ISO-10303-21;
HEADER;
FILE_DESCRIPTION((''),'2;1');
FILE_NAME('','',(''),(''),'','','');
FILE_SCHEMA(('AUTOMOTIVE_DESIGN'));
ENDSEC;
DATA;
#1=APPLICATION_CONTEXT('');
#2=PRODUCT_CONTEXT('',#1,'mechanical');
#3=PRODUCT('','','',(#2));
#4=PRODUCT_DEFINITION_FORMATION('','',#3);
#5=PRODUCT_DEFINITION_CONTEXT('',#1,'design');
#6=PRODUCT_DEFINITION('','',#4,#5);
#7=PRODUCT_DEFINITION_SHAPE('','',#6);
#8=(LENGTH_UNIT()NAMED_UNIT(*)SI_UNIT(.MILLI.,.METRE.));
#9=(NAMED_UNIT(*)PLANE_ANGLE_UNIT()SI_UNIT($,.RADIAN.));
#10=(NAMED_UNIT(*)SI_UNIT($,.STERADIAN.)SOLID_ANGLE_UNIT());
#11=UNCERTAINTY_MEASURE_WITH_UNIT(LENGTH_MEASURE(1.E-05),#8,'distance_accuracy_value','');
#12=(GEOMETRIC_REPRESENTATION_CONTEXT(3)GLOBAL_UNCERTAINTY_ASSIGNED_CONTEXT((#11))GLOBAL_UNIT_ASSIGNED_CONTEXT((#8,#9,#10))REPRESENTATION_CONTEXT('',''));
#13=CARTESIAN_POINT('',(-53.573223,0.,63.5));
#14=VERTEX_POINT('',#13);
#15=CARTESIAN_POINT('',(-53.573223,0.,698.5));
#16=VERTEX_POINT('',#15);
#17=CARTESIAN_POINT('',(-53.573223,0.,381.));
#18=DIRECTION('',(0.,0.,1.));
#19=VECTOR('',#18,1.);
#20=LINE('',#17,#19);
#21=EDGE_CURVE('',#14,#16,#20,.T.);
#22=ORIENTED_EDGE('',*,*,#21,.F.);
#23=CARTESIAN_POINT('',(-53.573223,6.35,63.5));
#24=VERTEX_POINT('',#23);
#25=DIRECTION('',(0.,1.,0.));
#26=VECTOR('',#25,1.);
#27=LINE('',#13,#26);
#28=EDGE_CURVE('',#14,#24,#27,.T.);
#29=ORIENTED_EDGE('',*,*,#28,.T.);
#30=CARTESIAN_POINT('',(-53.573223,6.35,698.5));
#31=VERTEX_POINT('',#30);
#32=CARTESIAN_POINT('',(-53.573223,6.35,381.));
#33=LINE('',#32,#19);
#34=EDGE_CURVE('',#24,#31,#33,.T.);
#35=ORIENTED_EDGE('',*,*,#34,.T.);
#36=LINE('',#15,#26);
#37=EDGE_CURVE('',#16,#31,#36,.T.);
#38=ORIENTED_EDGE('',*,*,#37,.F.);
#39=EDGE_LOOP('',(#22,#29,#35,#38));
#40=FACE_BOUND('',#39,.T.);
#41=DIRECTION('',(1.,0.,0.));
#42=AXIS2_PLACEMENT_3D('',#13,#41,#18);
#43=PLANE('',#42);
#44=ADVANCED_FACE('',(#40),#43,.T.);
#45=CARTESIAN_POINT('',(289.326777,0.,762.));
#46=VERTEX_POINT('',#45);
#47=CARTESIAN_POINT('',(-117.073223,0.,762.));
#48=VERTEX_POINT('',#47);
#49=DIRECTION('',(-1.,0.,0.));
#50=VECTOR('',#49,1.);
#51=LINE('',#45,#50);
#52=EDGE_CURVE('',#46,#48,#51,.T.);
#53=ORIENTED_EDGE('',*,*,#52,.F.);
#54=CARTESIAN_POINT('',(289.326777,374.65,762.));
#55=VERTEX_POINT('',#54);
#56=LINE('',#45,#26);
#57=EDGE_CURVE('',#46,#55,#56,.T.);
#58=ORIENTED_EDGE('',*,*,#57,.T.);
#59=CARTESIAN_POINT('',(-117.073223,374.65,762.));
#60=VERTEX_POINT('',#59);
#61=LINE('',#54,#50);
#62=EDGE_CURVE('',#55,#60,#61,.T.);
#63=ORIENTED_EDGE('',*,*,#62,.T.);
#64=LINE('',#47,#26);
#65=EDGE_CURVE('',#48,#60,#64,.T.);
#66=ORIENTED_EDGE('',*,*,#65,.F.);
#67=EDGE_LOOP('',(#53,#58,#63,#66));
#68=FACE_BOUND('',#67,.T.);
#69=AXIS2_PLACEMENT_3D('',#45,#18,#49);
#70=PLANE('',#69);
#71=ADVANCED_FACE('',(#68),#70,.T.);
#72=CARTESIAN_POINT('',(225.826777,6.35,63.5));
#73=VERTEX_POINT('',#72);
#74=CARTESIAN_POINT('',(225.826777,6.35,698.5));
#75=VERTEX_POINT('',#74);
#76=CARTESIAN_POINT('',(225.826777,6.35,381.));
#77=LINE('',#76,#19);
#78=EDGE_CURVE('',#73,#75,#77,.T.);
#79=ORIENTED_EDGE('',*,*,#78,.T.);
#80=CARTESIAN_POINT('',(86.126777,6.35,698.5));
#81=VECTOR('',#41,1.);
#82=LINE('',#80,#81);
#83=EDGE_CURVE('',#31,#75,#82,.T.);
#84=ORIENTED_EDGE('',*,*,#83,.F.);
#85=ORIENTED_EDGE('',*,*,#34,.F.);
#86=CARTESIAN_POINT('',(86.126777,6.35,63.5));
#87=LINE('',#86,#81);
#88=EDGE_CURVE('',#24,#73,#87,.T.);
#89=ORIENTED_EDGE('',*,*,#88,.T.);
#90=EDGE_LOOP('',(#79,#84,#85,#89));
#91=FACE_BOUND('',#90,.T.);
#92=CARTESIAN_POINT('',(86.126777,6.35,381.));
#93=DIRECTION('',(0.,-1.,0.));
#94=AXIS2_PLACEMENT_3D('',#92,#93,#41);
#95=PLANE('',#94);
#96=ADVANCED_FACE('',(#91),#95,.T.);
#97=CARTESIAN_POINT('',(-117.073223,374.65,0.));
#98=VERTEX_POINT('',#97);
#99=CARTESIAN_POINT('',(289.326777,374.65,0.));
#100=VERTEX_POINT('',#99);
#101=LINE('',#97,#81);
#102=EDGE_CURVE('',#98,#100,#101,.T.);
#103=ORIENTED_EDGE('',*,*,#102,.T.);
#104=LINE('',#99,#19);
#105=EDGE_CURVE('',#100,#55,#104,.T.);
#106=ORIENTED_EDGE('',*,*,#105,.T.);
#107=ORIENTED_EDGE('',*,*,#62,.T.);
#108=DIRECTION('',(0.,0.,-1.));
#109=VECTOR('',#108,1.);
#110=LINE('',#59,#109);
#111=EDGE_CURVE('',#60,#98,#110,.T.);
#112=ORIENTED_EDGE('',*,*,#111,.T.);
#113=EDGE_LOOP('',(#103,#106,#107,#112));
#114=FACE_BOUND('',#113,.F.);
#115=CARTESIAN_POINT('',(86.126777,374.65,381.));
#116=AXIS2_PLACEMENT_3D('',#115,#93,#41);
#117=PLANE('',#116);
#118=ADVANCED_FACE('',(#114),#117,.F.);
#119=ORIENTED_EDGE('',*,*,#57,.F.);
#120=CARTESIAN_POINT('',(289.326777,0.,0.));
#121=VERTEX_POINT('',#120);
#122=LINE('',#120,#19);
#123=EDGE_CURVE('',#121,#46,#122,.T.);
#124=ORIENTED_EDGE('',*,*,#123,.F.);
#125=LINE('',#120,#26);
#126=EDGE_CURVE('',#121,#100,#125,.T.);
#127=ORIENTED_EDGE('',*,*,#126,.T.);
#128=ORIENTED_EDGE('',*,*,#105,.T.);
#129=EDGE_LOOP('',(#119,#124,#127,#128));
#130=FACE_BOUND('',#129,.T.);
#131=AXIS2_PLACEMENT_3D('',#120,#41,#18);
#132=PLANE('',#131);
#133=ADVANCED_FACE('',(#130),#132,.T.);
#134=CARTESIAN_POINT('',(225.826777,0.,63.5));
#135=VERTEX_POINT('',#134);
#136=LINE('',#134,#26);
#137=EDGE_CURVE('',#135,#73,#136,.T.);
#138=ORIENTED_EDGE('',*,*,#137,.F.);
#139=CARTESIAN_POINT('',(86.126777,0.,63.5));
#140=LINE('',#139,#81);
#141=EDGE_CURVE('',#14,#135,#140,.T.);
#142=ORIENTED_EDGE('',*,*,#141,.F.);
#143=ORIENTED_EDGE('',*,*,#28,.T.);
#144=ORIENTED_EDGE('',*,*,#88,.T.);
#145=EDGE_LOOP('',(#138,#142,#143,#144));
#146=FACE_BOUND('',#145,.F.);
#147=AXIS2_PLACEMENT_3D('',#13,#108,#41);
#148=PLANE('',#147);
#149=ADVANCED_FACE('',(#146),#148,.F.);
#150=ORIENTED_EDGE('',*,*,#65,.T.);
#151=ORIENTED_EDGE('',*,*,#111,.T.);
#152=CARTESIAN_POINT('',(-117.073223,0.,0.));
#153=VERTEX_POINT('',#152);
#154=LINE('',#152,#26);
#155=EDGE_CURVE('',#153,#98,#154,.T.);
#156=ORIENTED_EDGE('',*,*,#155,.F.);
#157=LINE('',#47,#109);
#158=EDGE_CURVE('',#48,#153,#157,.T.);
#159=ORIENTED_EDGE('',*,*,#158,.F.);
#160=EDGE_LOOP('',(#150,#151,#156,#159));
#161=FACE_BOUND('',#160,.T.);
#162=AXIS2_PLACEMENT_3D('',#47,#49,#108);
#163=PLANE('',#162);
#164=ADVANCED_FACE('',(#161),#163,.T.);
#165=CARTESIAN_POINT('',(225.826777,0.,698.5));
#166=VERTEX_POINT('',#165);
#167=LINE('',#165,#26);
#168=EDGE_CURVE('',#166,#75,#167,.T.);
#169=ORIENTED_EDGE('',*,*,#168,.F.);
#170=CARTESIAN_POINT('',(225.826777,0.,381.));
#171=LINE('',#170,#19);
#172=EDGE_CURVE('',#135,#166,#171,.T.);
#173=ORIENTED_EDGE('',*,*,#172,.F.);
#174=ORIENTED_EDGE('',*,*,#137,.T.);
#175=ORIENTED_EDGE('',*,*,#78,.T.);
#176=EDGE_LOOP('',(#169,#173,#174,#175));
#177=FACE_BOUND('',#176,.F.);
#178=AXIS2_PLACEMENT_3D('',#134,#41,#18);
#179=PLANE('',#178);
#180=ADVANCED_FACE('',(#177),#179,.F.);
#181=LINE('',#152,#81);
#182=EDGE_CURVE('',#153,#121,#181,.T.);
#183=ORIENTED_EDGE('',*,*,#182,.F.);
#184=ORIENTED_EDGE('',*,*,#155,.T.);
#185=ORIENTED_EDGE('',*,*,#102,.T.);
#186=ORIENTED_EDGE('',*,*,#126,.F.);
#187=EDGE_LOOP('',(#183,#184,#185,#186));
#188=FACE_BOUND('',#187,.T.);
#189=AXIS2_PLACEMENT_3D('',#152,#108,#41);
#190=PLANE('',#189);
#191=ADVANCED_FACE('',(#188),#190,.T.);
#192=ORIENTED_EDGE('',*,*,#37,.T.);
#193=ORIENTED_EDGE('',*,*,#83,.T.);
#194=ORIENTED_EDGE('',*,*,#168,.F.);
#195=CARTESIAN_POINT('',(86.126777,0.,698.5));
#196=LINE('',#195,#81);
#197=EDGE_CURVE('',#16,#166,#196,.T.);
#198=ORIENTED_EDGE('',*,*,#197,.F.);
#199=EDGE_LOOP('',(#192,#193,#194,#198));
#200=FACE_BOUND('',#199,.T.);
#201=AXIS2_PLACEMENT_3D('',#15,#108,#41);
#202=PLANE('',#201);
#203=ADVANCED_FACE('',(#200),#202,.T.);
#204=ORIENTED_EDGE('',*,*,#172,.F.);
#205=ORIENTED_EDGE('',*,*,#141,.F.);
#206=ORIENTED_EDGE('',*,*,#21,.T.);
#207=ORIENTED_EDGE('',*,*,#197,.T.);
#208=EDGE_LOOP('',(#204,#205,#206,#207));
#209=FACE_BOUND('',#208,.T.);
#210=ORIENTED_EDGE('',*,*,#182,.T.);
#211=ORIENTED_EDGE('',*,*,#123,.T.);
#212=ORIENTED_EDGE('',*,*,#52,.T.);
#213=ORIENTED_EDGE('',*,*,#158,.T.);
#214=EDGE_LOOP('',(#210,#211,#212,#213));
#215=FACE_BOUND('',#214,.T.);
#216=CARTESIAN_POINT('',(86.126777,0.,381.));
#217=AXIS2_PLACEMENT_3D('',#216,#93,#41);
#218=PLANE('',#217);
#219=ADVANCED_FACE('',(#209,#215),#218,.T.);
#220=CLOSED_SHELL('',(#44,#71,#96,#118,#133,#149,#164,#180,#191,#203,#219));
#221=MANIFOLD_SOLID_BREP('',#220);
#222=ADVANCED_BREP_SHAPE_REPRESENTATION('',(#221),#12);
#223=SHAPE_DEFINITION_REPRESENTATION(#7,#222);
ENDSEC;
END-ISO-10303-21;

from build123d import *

# Parameters (mm, degrees)
F0_W     = 279.4
F0_H     = 635
F1_DEPTH = 374.65
F2_DEPTH = 6.35


# Not quite as in the source:
# - a feature names something its author has since deleted; it is built from what else it names


with BuildPart() as f1:
    # F0 (on Front) → F1 (new body)
    with BuildSketch(Plane.XZ):
        Polygon((263.9267770052, 0), (289.3267770052, 0), (289.3267770052, 762), (263.9267770052, 762), (-117.0732229948, 762), (-117.0732229948, 0), align=None)
        with Locations((86.1267770052, 381)):
            Rectangle(F0_W, F0_H, mode=Mode.SUBTRACT)
        with Locations((86.1267770052, 381)):
            Rectangle(F0_W, F0_H)
    extrude(amount=-F1_DEPTH)

    # F0 (on Front) → F2 (cut)
    with BuildSketch(Plane.XZ):
        with Locations((86.1267770052, 381)):
            Rectangle(F0_W, F0_H)
    extrude(amount=-F2_DEPTH, mode=Mode.SUBTRACT)


solid = f1.part
